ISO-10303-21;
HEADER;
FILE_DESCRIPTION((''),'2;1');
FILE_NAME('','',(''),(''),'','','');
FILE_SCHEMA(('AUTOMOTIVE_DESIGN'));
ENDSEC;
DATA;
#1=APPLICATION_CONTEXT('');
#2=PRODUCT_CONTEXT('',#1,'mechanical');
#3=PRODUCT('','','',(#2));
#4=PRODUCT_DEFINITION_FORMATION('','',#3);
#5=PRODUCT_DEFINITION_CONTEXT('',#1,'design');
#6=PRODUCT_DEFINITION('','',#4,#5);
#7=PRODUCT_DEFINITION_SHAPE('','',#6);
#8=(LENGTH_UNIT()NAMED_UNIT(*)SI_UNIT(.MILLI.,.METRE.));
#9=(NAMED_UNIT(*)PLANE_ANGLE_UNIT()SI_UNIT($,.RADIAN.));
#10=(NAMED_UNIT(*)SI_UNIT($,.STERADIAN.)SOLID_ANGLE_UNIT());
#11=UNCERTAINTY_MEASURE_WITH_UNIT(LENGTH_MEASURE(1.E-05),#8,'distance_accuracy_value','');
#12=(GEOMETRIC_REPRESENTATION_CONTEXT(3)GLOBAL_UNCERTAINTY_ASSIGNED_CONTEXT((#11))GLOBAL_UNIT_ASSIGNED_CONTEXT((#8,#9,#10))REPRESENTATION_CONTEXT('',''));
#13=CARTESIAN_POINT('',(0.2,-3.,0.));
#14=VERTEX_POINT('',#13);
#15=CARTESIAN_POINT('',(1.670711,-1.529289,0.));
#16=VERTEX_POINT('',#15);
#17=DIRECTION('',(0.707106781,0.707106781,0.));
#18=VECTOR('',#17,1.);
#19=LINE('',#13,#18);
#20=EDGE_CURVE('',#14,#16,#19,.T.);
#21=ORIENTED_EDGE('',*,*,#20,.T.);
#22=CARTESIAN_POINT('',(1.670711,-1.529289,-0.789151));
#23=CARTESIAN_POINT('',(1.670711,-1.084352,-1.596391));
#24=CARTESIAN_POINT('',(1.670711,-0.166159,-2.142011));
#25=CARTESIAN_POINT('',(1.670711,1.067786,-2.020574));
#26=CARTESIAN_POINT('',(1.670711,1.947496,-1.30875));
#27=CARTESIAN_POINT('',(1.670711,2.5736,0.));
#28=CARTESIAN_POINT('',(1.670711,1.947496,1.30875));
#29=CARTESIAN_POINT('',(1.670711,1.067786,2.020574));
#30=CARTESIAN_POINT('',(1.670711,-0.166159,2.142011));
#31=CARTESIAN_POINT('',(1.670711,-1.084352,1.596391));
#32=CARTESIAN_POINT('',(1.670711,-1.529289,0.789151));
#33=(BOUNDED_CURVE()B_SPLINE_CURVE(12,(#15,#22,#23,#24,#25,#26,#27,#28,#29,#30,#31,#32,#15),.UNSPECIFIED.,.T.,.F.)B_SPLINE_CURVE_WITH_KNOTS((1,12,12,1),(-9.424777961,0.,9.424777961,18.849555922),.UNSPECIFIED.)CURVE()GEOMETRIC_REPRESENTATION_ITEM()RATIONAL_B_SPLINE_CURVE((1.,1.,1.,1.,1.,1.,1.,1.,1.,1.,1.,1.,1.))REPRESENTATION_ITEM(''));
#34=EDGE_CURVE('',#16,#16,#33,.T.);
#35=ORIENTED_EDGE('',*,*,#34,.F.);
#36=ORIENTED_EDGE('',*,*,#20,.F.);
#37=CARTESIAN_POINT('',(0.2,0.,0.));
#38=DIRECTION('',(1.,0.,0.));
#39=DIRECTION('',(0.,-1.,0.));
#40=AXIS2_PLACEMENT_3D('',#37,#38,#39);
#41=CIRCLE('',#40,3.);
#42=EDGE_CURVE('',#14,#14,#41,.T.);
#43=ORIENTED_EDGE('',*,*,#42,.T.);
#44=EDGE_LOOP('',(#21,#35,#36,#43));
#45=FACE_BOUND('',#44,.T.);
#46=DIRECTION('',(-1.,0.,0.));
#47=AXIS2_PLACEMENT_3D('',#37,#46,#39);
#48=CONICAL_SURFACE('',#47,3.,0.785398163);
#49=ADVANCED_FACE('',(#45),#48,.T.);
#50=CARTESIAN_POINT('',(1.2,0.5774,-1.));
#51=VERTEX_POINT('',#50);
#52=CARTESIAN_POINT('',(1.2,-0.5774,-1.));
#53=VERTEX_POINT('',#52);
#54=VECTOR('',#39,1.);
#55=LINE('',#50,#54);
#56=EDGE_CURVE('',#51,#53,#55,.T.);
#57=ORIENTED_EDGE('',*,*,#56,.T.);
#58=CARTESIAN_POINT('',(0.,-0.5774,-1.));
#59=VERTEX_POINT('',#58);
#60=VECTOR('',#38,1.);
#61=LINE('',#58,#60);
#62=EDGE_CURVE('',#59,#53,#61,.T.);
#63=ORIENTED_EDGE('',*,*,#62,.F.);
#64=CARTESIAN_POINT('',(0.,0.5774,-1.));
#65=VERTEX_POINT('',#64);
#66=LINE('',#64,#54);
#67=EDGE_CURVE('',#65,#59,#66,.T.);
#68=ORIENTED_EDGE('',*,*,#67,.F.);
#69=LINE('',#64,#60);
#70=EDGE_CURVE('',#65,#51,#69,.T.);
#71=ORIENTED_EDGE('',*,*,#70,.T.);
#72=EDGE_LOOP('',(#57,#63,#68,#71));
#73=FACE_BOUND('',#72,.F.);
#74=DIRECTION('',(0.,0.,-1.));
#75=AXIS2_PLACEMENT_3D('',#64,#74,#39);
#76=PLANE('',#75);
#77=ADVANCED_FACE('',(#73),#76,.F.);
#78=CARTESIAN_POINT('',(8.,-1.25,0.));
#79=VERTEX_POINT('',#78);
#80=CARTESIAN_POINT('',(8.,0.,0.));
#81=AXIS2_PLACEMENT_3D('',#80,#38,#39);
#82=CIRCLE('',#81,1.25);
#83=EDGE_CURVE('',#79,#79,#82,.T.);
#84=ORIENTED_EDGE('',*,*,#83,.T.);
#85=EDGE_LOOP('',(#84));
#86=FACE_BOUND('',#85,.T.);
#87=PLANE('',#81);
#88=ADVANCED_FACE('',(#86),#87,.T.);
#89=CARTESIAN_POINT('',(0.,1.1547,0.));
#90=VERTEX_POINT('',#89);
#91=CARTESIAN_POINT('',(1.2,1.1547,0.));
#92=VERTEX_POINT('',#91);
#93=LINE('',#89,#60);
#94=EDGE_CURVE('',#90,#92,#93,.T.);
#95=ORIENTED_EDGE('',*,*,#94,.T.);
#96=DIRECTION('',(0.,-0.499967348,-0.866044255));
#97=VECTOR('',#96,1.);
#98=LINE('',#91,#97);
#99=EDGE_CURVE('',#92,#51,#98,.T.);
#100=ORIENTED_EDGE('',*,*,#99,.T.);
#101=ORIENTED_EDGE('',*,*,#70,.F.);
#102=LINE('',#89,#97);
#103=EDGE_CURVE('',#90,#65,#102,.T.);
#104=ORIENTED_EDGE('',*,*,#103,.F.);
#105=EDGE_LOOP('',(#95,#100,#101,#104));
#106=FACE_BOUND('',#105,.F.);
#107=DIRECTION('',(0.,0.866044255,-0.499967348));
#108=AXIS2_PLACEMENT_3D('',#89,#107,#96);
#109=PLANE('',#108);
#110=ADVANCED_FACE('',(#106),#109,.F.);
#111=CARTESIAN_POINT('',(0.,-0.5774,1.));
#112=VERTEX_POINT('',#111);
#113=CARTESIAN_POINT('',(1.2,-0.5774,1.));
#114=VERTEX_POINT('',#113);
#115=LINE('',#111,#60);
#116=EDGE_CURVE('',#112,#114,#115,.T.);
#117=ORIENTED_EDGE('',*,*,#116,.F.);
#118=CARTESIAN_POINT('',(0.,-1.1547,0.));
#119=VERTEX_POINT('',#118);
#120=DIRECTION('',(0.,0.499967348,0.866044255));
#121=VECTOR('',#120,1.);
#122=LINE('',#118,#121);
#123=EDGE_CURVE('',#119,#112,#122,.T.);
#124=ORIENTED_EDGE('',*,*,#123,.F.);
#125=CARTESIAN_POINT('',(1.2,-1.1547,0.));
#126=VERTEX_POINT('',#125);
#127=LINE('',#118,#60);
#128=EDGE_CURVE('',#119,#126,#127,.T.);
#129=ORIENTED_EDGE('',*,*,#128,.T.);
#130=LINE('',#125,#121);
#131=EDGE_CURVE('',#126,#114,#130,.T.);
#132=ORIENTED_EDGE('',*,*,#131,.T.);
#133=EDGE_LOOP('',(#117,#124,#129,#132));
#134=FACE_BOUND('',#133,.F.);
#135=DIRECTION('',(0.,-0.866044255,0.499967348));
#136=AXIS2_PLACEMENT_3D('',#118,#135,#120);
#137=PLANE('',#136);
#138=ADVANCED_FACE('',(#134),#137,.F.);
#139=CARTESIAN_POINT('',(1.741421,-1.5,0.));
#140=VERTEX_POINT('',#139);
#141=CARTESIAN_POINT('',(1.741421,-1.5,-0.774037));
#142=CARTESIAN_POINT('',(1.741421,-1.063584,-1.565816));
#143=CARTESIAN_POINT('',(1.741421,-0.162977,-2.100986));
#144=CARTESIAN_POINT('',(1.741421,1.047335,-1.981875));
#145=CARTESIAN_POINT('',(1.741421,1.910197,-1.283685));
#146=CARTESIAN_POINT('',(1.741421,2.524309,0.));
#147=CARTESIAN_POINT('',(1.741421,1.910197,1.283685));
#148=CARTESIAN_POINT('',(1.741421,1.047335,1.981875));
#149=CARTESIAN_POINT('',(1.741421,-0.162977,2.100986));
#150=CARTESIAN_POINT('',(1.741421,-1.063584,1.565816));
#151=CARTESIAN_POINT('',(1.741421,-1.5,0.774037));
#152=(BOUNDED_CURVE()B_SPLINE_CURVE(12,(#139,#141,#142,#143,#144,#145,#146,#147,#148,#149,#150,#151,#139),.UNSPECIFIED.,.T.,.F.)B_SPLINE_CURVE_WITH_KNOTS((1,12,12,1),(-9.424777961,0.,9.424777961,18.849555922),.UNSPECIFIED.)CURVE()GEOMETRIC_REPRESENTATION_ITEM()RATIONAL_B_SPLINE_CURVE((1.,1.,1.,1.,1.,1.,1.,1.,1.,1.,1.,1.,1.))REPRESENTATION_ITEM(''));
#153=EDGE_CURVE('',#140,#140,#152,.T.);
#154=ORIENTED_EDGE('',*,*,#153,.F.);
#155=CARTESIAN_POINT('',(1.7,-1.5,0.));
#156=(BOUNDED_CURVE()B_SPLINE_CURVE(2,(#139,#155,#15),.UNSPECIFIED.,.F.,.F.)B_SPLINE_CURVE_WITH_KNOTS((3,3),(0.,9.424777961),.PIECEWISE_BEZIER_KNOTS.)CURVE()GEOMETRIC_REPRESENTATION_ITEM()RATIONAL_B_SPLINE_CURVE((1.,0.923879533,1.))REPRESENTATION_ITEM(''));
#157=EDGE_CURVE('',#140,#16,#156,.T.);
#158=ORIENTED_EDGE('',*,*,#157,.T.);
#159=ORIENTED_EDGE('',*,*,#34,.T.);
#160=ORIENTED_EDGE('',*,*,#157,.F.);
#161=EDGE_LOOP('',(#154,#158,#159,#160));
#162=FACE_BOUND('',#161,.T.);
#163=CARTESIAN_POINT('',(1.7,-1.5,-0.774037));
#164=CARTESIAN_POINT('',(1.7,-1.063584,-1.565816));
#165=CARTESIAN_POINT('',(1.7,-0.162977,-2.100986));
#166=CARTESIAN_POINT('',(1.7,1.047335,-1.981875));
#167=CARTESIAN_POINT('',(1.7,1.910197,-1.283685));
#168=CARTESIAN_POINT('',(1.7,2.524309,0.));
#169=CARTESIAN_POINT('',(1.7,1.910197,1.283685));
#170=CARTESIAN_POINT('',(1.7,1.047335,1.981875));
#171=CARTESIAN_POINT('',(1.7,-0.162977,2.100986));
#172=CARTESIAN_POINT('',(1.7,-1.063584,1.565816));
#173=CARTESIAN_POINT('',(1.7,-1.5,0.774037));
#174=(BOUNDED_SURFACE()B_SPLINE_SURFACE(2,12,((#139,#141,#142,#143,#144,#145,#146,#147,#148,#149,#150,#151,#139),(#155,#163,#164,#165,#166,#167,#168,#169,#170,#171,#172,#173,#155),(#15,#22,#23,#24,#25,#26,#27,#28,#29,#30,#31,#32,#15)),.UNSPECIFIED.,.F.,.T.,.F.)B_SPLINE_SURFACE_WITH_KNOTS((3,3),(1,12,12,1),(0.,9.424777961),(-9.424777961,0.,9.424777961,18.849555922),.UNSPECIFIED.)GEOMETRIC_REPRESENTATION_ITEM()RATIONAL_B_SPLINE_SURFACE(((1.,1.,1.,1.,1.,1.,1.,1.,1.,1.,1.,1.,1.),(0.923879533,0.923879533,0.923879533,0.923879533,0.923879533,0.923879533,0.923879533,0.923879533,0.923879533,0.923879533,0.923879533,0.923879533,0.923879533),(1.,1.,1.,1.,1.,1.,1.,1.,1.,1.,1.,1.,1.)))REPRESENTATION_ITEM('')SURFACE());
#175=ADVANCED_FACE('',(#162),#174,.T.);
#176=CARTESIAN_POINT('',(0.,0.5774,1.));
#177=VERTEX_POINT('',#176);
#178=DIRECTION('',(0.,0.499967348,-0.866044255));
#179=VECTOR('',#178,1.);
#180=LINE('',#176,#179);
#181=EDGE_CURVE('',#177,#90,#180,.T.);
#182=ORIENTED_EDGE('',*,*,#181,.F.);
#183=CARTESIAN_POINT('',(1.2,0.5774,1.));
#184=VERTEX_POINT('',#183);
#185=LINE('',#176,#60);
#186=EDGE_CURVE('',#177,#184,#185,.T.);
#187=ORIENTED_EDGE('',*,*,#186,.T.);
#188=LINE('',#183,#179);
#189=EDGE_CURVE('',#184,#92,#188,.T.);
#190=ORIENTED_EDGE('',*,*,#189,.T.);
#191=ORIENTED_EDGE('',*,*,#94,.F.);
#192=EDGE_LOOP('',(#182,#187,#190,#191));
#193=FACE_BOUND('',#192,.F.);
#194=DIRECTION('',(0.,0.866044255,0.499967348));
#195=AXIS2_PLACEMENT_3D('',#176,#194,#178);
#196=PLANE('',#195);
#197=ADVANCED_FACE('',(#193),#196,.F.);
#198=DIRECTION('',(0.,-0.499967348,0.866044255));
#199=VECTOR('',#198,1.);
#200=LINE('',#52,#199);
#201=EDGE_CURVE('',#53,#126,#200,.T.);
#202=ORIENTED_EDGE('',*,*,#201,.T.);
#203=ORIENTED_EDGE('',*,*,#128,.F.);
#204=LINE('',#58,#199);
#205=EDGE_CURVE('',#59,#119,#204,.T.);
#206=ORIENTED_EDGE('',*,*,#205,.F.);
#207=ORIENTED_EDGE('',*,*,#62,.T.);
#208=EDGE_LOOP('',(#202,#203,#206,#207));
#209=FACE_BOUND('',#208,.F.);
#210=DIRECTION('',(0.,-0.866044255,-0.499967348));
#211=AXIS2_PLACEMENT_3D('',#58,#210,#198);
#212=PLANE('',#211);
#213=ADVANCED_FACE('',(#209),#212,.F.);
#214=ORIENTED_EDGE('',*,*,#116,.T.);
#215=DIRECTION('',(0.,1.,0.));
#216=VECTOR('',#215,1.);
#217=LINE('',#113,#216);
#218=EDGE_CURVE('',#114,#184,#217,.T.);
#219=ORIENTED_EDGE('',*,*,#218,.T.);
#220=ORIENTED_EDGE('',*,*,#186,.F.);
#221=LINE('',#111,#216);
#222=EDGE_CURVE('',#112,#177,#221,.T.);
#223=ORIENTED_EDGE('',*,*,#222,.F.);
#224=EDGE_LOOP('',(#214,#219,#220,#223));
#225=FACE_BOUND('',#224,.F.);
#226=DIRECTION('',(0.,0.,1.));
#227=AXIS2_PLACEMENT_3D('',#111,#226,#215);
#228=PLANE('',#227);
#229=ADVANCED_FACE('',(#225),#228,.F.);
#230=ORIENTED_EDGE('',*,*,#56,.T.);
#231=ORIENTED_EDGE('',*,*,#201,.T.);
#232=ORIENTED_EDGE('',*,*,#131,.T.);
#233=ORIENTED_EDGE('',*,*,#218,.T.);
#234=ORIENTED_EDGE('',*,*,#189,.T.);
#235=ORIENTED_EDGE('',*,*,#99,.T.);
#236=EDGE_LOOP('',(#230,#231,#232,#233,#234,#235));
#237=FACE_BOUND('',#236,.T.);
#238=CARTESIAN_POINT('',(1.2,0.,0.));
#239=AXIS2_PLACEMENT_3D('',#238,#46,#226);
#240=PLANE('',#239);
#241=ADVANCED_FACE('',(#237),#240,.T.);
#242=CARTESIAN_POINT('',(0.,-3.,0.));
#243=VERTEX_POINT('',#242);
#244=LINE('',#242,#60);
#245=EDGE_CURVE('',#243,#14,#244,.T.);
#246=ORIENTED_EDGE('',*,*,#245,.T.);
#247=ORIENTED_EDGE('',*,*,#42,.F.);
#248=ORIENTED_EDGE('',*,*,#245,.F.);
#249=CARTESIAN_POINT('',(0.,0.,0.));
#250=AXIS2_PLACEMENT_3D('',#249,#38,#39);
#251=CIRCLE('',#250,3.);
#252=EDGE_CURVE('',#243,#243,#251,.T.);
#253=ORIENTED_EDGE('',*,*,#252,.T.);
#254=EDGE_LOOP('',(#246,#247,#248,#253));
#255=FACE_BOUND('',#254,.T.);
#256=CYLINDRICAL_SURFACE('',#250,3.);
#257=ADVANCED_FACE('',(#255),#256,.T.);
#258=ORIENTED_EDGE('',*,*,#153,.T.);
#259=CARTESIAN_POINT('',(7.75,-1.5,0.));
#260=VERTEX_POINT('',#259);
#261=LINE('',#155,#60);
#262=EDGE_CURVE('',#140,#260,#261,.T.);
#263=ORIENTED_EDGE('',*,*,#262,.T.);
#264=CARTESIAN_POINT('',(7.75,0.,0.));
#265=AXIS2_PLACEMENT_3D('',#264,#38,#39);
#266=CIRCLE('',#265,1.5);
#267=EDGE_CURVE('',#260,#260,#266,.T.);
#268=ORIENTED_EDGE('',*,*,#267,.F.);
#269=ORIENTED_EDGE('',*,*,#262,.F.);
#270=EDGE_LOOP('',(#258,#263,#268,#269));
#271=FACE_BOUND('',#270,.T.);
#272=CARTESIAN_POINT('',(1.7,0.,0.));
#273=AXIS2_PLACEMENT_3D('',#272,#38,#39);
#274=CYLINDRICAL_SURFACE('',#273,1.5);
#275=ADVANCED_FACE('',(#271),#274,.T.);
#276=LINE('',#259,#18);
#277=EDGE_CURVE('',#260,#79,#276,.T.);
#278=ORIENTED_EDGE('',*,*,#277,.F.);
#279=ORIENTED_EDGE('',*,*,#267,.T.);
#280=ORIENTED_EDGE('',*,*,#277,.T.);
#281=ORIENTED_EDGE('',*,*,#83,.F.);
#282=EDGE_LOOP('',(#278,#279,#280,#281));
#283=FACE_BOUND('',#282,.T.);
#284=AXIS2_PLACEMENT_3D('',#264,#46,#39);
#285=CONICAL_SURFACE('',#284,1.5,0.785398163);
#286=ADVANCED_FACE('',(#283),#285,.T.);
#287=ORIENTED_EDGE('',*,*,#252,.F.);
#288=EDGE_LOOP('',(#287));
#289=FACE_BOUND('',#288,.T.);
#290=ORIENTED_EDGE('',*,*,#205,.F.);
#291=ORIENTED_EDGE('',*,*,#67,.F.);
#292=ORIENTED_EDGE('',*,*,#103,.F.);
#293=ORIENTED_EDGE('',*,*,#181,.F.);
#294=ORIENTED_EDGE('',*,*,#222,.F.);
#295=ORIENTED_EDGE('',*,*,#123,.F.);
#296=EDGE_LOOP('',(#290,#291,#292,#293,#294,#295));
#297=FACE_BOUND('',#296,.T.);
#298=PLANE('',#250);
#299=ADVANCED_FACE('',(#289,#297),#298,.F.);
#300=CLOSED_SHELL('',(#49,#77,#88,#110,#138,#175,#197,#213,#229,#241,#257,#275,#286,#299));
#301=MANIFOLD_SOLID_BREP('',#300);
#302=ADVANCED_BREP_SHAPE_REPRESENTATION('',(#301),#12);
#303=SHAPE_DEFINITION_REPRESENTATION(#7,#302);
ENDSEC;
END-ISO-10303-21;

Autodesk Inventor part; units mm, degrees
ref_plane "YZ Plane" through (0, 0, 0) normal (1, 0, 0) x (0, 1, 0)
sketch "Эскиз1" plane through (0, 0, 0) normal (0, 1, 0) x (-1, 0, 0)
  point P0 (0, 0)
sketch "Эскиз2" plane through (0, 0, 0) normal (0, 0, 1) x (-1, 0, 0)
  line L0 (-8, 1.5) -> (-8, 0)
  line L1 (-1.7, 1.5) -> (-8, 1.5)
  line L2 (-0.2, 3) -> (-1.7, 1.5)
  line L3 (0, 3) -> (-0.2, 3)
  line L4 (0, 0) -> (0, 3)
  line L5 (-8, 0) -> (0, 0)
  line L6 (-8, 0) -> (0, 0)
  line L7 (0, -9.6) -> (0, 1.6) projected
  line L8 (1.6, 0) -> (-9.6, 0) projected
  dimension "ParC" = 0.2
  dimension "d43" = 45
  dimension "d44" = 3
  dimension "d45" = 1.5
  dimension "d46" = 8
  dimension "d47" = 0
  dimension "d48" = 0
revolve "Вращение1" add sketch "Эскиз2" angle 360 about axis through (8, 0, 0) along (1, 0, 0)
sketch "Эскиз3" plane through (0, 0, 0) normal (-1, 0, 0) x (0, 0, 1)
  line L0 (-1, 0.5774) -> (-1, -0.5774)
  line L1 (0, 1.1547) -> (-1, 0.5774)
  line L2 (1, 0.5774) -> (0, 1.1547)
  line L3 (1, -0.5774) -> (1, 0.5774)
  line L4 (0, -1.1547) -> (1, -0.5774)
  line L5 (-1, -0.5774) -> (0, -1.1547)
  circle A0 centre (0, 0) radius 1 construction
  circle A1 centre (0, 0) radius 1.5 construction
  dimension "d11" = 2
  dimension "d13" = 120
  dimension "d15" = 120
extrude "Выдавливание1" cut sketch "Эскиз3" against normal blind 1.2
fillet "Сопряжение1" radius 0.1 1 edges at (1.7, 1.5, 0)
chamfer "Фаска1" distance 0.25 angle 45 1 edges at (8, 1.5, 0) measured on face at (5.9138, -1.4041, 0.5277)
thread "Резьба1" size "M3x0.5" class "6g" standard "ISO Metric profile" length 5.3
ref_plane "MSC_PF1" through (0, 0, 0) normal (1, 0, 0) x (0, 1, 0)
ref_plane "MSC_PT1" through (0, 0, 0) normal (1, 0, 0) x (0, 1, 0)
equation "\"d43\" = 0.5 * ang"
equation "\"d44\" = 0.5 * dk"
equation "\"d45\" = 0.5 * NND"
equation "\"d46\" = NLG"
equation "\"d11\" = ParS"
equation "\"d16\" = ParT"
equation "\"d18\" = r"
equation "\"d19\" = 0.5 * PTC"
equation "\"d39\" = 0.5 * PTC"
equation "\"NND\" = 3"
equation "\"PTC\" = 0.5"
equation "\"dk\" = 6"
equation "\"ParK\" = 1.7"
equation "\"ParS\" = 2"
equation "\"ParT\" = 1.2"
equation "\"r\" = 0.1"
equation "\"NLG\" = 8"
equation "\"ang\" = 90deg"
equation "\"THREADDIA\" = NND"
properties part number "ISO 10642 - M3 x  8" material "Сталь"
